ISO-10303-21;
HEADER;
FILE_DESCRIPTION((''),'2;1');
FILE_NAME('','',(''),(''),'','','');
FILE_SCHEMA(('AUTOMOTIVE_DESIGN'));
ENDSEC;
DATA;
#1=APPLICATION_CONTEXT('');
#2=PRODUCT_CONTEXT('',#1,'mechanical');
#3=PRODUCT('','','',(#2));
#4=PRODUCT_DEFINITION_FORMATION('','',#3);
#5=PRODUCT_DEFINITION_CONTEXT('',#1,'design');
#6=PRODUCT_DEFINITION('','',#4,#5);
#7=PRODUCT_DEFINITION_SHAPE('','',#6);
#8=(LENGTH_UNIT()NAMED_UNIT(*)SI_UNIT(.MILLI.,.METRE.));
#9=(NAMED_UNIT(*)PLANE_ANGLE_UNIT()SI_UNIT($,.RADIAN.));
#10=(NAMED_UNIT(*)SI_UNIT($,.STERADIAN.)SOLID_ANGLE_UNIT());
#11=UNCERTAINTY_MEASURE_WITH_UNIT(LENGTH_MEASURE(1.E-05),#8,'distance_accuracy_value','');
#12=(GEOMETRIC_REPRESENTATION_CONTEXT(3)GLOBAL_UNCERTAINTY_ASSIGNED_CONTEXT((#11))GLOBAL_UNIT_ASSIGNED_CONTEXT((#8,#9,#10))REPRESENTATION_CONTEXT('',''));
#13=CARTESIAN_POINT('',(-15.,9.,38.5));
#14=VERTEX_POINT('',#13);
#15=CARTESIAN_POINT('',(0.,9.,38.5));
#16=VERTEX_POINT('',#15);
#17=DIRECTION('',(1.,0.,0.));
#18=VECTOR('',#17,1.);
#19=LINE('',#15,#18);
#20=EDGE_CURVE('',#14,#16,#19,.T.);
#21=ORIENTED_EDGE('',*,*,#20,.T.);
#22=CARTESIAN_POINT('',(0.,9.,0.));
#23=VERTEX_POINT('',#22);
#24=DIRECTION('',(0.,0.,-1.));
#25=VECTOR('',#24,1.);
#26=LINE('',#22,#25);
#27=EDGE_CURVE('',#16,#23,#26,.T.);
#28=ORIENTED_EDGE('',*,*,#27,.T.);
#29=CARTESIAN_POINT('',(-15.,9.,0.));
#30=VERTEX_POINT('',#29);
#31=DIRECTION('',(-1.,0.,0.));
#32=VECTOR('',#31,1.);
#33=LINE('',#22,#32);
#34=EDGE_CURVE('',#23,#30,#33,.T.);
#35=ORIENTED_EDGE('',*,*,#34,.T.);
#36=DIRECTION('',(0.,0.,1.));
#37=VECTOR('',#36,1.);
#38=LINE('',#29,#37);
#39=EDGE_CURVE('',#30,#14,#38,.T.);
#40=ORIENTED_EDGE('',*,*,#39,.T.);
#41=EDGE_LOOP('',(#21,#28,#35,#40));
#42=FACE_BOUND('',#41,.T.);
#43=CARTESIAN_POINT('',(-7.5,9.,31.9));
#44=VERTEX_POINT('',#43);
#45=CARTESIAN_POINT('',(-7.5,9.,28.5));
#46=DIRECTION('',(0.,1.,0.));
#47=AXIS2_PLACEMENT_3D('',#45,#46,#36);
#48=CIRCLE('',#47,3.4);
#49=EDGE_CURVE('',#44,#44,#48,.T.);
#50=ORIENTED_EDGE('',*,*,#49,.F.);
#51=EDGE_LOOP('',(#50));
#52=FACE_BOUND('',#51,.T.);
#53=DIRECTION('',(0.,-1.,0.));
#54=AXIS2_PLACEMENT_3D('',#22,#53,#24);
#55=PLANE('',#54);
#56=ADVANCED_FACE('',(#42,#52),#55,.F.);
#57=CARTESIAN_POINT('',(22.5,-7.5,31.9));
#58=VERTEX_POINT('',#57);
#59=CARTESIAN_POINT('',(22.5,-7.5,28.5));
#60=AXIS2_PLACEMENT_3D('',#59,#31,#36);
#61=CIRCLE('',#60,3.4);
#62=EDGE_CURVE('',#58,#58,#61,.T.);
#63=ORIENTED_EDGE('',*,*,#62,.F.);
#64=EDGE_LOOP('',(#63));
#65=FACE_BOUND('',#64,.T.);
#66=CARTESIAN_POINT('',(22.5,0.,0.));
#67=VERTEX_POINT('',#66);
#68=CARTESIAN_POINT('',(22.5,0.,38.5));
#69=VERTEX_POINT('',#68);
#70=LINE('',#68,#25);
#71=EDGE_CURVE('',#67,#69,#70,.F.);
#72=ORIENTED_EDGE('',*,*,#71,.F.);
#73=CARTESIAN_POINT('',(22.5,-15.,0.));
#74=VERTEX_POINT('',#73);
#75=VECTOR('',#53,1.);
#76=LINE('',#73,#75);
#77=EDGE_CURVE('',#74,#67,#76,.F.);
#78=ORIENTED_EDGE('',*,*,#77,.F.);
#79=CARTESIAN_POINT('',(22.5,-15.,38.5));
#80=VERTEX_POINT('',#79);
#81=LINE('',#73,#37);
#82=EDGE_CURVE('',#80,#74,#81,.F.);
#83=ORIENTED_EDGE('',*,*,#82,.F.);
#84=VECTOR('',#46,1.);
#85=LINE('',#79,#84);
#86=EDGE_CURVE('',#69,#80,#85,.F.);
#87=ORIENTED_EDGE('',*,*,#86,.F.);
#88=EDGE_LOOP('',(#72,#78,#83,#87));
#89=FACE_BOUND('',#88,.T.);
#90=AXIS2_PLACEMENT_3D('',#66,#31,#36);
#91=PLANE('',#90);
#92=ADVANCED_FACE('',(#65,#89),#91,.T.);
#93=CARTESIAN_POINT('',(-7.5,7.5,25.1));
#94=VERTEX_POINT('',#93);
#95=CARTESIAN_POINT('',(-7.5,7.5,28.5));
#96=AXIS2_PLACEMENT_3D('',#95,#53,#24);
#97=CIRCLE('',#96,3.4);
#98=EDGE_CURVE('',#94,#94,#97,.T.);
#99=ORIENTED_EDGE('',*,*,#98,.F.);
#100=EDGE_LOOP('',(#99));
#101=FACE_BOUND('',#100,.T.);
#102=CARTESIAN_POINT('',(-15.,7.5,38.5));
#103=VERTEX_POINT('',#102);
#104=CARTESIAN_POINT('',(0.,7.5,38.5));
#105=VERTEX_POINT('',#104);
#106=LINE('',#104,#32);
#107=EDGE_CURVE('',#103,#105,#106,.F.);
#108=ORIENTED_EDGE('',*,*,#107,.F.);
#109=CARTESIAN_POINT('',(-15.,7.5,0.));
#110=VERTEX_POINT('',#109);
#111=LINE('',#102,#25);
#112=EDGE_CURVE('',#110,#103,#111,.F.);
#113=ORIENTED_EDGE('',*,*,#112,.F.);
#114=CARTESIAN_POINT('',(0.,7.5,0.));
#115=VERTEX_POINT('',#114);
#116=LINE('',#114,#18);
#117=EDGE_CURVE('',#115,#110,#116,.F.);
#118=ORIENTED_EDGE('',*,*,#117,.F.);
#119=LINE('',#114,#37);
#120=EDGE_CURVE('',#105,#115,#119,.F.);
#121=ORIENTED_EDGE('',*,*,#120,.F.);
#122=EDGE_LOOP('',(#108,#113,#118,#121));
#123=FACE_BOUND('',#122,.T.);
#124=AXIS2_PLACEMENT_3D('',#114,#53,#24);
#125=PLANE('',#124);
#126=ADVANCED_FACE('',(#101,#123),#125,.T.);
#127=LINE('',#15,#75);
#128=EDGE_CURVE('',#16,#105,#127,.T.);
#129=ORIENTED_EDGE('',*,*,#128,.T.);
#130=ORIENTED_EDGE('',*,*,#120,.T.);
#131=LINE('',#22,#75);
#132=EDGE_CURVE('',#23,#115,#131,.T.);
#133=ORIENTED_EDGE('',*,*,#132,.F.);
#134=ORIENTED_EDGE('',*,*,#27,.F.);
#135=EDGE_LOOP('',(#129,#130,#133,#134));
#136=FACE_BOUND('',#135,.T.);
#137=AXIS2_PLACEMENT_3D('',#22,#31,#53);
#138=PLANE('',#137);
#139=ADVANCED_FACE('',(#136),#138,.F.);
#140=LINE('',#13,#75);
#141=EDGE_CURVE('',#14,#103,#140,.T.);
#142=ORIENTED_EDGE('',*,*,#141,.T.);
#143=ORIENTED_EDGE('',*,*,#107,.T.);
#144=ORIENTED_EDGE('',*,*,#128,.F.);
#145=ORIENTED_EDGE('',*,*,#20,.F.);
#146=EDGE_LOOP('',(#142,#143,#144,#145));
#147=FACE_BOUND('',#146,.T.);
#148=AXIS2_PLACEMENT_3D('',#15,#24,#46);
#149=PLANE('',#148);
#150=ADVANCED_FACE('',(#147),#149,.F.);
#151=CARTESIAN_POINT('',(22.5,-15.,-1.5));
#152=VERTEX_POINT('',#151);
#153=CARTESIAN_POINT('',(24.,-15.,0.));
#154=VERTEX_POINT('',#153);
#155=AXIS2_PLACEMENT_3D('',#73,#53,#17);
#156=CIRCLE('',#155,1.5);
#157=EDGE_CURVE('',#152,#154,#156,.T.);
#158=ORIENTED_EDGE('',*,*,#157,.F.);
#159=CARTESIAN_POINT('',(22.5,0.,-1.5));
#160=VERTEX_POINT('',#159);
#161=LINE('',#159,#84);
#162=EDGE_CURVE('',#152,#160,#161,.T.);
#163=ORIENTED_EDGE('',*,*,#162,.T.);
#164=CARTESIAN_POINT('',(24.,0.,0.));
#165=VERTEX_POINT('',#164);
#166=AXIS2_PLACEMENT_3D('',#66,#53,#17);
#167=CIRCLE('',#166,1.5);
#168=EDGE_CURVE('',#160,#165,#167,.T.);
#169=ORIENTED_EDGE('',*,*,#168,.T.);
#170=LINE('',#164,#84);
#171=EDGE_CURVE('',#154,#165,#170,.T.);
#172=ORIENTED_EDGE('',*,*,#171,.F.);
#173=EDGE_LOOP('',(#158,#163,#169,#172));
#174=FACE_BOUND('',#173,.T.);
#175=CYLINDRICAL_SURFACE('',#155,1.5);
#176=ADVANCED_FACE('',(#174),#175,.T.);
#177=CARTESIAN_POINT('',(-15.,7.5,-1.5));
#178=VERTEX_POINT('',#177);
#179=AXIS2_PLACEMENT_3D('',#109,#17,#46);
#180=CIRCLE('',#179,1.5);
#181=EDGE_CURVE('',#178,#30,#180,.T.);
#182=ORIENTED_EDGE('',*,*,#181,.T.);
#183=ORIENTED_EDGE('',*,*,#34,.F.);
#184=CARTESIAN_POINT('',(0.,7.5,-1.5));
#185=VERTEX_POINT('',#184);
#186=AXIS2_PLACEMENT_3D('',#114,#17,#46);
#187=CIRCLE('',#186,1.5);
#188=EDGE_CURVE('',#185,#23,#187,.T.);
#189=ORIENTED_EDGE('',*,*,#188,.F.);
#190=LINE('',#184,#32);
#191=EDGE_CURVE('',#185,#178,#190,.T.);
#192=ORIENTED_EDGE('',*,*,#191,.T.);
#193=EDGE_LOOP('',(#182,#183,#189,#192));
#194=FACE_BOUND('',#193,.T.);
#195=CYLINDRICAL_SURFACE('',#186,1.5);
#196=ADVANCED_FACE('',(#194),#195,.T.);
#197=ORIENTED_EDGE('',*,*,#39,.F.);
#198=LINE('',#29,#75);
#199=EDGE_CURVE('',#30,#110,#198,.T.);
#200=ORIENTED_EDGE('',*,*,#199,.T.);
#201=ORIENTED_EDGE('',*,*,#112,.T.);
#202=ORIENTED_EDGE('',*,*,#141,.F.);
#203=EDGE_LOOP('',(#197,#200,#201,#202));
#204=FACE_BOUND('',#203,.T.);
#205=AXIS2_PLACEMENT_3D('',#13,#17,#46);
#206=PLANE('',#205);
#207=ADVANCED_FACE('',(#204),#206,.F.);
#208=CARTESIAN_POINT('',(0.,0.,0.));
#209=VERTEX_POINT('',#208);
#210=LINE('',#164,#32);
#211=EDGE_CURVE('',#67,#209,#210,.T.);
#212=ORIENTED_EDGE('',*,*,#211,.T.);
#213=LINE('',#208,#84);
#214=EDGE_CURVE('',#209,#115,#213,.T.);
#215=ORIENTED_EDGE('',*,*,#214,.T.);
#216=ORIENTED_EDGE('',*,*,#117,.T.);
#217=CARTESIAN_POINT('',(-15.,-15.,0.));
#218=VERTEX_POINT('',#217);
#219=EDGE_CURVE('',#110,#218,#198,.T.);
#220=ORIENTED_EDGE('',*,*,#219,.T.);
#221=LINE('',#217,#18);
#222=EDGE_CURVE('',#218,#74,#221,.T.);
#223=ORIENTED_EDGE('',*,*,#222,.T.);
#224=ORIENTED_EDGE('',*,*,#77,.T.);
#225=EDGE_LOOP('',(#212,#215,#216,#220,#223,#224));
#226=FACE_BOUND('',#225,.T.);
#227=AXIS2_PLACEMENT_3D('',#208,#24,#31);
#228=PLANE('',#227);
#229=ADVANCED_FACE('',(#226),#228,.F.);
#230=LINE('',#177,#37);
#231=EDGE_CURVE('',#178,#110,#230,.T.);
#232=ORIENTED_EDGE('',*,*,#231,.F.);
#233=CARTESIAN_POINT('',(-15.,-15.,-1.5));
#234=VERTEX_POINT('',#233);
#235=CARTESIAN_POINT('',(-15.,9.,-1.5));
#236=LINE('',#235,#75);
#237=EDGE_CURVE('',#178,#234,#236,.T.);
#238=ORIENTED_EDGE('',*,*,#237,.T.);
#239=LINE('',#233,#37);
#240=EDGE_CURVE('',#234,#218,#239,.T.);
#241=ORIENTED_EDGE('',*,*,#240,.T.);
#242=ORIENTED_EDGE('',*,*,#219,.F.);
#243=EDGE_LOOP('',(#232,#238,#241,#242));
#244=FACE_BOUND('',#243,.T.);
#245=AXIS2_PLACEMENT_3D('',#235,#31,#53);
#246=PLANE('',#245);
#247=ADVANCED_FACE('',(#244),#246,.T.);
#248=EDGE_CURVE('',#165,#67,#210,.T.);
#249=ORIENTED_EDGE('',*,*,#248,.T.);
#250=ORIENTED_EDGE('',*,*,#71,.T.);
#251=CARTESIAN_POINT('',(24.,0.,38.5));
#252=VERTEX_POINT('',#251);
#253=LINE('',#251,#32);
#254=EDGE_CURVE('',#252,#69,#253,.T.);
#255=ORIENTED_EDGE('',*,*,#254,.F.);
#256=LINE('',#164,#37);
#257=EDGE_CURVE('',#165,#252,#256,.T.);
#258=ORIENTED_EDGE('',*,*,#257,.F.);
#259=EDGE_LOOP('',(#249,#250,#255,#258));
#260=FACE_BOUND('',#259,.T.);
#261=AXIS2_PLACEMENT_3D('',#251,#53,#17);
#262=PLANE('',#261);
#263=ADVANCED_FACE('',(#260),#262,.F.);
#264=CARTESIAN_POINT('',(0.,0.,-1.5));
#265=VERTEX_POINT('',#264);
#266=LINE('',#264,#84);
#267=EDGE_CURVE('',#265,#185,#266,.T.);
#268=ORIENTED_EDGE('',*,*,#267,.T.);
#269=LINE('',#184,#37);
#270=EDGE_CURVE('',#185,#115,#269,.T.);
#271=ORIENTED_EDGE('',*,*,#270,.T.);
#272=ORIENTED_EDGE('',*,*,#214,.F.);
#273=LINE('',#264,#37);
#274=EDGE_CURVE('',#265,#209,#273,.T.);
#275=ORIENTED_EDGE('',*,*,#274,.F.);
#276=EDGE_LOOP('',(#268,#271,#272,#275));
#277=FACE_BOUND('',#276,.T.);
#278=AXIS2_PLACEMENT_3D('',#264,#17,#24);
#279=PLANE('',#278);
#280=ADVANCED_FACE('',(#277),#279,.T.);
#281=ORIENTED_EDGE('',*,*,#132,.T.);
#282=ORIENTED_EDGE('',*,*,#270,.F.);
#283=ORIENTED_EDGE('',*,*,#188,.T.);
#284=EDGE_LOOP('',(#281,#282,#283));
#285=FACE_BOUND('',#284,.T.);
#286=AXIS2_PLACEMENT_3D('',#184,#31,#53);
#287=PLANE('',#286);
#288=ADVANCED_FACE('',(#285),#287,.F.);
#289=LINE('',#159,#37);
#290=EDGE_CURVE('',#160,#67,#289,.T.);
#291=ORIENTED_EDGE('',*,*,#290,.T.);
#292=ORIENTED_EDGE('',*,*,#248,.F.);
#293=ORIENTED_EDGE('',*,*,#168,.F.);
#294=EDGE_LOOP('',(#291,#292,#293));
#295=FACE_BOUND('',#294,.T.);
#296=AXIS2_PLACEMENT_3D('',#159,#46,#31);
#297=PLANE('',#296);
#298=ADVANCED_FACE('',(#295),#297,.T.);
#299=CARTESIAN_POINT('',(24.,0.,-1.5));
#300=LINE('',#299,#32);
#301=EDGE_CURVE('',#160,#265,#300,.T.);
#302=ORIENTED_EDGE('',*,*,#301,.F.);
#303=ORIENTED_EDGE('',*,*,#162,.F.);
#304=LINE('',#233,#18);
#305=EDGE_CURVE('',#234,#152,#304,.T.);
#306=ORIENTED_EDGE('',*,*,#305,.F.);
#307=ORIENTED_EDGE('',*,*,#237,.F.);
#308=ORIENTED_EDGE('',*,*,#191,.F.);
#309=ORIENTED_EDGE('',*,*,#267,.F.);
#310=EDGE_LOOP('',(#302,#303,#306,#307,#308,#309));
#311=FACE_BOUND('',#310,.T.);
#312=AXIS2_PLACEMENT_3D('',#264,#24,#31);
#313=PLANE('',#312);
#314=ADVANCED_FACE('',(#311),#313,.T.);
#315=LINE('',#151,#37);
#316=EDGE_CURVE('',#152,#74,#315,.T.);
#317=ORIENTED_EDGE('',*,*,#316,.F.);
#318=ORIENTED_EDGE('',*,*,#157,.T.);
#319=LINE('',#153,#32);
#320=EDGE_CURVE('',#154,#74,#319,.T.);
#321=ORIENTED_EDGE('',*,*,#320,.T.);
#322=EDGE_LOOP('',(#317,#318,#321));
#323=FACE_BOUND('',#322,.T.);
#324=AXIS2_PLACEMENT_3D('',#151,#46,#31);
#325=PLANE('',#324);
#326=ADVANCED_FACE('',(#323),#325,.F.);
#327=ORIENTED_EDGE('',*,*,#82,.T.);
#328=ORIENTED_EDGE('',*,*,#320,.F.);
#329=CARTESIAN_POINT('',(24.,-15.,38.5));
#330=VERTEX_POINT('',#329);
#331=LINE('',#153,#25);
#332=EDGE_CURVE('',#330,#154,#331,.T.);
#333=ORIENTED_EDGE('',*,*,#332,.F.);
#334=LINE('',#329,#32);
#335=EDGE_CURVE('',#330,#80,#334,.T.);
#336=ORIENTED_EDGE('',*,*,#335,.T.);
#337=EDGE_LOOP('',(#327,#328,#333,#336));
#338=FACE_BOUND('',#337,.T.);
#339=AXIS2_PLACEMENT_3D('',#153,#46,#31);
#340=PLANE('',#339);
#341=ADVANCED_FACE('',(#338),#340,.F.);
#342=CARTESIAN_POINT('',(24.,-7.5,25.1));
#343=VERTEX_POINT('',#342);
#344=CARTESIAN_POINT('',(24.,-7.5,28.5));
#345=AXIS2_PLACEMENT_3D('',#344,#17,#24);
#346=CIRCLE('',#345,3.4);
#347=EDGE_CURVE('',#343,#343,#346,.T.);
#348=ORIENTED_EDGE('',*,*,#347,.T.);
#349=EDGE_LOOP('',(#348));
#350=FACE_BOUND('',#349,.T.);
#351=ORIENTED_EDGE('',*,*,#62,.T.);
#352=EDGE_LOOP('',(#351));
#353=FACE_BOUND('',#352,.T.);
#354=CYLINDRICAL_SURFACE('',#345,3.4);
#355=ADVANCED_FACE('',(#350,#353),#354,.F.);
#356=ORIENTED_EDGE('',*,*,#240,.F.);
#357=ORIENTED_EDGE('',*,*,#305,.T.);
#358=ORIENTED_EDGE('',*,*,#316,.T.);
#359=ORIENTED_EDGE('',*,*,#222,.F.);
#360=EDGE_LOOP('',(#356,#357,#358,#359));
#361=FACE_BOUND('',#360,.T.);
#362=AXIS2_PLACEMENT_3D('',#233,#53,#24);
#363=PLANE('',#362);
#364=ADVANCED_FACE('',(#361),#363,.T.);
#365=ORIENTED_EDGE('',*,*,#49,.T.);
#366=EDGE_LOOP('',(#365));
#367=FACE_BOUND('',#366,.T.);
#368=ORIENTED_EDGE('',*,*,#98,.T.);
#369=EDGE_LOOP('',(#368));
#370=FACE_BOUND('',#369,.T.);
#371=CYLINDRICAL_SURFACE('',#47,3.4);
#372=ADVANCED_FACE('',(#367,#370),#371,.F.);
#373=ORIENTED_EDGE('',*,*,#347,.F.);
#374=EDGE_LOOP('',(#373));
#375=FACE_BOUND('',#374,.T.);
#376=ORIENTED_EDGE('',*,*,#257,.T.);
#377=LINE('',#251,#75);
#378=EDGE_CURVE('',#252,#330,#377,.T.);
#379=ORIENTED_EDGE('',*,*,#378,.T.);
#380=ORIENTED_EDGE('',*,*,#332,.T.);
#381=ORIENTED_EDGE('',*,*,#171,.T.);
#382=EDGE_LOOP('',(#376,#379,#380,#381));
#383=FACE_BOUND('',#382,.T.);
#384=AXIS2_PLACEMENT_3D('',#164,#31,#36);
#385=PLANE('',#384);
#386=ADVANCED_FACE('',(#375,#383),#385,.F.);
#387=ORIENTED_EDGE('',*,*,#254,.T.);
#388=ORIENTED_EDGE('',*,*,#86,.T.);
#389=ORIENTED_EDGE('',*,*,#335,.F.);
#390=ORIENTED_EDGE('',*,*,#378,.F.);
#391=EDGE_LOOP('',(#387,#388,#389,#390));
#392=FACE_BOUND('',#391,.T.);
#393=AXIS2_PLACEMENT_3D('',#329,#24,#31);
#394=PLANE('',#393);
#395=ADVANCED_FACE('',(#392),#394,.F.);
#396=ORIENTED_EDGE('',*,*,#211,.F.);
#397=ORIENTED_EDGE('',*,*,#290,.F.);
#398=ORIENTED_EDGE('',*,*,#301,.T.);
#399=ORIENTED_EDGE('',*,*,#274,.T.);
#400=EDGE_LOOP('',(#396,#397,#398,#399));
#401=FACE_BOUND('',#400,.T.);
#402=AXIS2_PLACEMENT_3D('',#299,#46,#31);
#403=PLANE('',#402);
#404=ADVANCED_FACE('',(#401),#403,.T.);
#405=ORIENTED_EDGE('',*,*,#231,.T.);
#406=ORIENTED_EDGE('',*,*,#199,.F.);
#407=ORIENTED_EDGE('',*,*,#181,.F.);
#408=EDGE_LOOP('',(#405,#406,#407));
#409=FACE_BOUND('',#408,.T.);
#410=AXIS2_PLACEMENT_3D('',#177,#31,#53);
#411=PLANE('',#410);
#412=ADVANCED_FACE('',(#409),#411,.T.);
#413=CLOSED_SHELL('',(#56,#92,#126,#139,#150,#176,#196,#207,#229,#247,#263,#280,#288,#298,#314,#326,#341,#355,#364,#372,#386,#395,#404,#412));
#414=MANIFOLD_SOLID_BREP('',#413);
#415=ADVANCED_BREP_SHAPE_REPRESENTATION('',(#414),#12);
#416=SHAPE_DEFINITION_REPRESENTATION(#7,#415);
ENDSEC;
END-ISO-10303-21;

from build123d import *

# Parameters (mm, degrees)
BASE_FLANGIA1_DEPTH             = 1.5
BORDO_FLANGIA1_START            = -24
BORDO_FLANGIA1_OUTLINE_W        = 1.5
BORDO_FLANGIA1_OUTLINE_H        = 38.5
BORDO_FLANGIA1_DEPTH            = 15
BORDO_FLANGIA1_START_2          = -15
BORDO_FLANGIA1_2_OUTLINE_W      = 1.5
BORDO_FLANGIA1_2_OUTLINE_H      = 38.5
BORDO_FLANGIA1_2_DEPTH          = 15
BORDO_FLANGIA1_3_DEPTH          = 15
BORDO_FLANGIA1_4_DEPTH          = 15
FORO_FILETTATO_M8_1_D           = 6.8
FORO_FILETTATO_M8_1_ON_FACE_2_D = 6.8


# Read off the part's stored shape, not the designer's step: Schizzo10
# Sheet-metal steps are written as plain solids
with BuildPart() as part:
    # Schizzo1 → Base-Flangia1 (new body)
    with BuildSketch(Plane.XY):
        Polygon((0, 0), (0, 9), (-15, 9), (-15, -15), (24, -15), (24, 0), align=None)
    extrude(amount=-BASE_FLANGIA1_DEPTH)

    # Bordo-Flangia1 outline → Bordo-Flangia1 (add)
    with BuildSketch(Plane(origin=(0, 9, 0), x_dir=(-1, 0, 0), z_dir=(0, 1, 0)).offset(BORDO_FLANGIA1_START)):
        with Locations((-23.25, 19.25)):
            Rectangle(BORDO_FLANGIA1_OUTLINE_W, BORDO_FLANGIA1_OUTLINE_H)
    extrude(amount=BORDO_FLANGIA1_DEPTH)

    # Bordo-Flangia1 2 outline → Bordo-Flangia1 2 (add)
    with BuildSketch(Plane.YZ.offset(BORDO_FLANGIA1_START_2)):
        with Locations((8.25, 19.25)):
            Rectangle(BORDO_FLANGIA1_2_OUTLINE_W, BORDO_FLANGIA1_2_OUTLINE_H)
    extrude(amount=BORDO_FLANGIA1_2_DEPTH)

    # Bordo-Flangia1 3 outline → Bordo-Flangia1 3 (cut)
    with BuildSketch(Plane(origin=(0, 9, 0), x_dir=(-1, 0, 0), z_dir=(0, 1, 0)).offset(BORDO_FLANGIA1_START)):
        with BuildLine():
            ThreePointArc((-22.5, -1.5), (-23.560660172, -1.060660172), (-24, 0))
            Line((-24, 0), (-24, -1.5))
            Line((-24, -1.5), (-22.5, -1.5))
        make_face()
    extrude(amount=BORDO_FLANGIA1_3_DEPTH, mode=Mode.SUBTRACT)

    # Bordo-Flangia1 4 outline → Bordo-Flangia1 4 (cut)
    with BuildSketch(Plane.YZ.offset(BORDO_FLANGIA1_START_2)):
        with BuildLine():
            ThreePointArc((9, 0), (8.560660172, -1.060660172), (7.5, -1.5))
            Line((7.5, -1.5), (9, -1.5))
            Line((9, -1.5), (9, 0))
        make_face()
    extrude(amount=BORDO_FLANGIA1_4_DEPTH, mode=Mode.SUBTRACT)

    # Foro filettato M8-1 (through all)
    with Locations(Plane(origin=(-7.5, 9, 28.5), x_dir=(0, 0, 1), z_dir=(0, 1, 0))):
        with Locations((0, 0)):
            Hole(FORO_FILETTATO_M8_1_D / 2)

    # Foro filettato M8-1 on face 2 (through all)
    with Locations(Plane(origin=(24, -7.5, 28.5), x_dir=(0, 0, 1), z_dir=(1, 0, 0))):
        with Locations((0, 0)):
            Hole(FORO_FILETTATO_M8_1_ON_FACE_2_D / 2)


solid = part.part
